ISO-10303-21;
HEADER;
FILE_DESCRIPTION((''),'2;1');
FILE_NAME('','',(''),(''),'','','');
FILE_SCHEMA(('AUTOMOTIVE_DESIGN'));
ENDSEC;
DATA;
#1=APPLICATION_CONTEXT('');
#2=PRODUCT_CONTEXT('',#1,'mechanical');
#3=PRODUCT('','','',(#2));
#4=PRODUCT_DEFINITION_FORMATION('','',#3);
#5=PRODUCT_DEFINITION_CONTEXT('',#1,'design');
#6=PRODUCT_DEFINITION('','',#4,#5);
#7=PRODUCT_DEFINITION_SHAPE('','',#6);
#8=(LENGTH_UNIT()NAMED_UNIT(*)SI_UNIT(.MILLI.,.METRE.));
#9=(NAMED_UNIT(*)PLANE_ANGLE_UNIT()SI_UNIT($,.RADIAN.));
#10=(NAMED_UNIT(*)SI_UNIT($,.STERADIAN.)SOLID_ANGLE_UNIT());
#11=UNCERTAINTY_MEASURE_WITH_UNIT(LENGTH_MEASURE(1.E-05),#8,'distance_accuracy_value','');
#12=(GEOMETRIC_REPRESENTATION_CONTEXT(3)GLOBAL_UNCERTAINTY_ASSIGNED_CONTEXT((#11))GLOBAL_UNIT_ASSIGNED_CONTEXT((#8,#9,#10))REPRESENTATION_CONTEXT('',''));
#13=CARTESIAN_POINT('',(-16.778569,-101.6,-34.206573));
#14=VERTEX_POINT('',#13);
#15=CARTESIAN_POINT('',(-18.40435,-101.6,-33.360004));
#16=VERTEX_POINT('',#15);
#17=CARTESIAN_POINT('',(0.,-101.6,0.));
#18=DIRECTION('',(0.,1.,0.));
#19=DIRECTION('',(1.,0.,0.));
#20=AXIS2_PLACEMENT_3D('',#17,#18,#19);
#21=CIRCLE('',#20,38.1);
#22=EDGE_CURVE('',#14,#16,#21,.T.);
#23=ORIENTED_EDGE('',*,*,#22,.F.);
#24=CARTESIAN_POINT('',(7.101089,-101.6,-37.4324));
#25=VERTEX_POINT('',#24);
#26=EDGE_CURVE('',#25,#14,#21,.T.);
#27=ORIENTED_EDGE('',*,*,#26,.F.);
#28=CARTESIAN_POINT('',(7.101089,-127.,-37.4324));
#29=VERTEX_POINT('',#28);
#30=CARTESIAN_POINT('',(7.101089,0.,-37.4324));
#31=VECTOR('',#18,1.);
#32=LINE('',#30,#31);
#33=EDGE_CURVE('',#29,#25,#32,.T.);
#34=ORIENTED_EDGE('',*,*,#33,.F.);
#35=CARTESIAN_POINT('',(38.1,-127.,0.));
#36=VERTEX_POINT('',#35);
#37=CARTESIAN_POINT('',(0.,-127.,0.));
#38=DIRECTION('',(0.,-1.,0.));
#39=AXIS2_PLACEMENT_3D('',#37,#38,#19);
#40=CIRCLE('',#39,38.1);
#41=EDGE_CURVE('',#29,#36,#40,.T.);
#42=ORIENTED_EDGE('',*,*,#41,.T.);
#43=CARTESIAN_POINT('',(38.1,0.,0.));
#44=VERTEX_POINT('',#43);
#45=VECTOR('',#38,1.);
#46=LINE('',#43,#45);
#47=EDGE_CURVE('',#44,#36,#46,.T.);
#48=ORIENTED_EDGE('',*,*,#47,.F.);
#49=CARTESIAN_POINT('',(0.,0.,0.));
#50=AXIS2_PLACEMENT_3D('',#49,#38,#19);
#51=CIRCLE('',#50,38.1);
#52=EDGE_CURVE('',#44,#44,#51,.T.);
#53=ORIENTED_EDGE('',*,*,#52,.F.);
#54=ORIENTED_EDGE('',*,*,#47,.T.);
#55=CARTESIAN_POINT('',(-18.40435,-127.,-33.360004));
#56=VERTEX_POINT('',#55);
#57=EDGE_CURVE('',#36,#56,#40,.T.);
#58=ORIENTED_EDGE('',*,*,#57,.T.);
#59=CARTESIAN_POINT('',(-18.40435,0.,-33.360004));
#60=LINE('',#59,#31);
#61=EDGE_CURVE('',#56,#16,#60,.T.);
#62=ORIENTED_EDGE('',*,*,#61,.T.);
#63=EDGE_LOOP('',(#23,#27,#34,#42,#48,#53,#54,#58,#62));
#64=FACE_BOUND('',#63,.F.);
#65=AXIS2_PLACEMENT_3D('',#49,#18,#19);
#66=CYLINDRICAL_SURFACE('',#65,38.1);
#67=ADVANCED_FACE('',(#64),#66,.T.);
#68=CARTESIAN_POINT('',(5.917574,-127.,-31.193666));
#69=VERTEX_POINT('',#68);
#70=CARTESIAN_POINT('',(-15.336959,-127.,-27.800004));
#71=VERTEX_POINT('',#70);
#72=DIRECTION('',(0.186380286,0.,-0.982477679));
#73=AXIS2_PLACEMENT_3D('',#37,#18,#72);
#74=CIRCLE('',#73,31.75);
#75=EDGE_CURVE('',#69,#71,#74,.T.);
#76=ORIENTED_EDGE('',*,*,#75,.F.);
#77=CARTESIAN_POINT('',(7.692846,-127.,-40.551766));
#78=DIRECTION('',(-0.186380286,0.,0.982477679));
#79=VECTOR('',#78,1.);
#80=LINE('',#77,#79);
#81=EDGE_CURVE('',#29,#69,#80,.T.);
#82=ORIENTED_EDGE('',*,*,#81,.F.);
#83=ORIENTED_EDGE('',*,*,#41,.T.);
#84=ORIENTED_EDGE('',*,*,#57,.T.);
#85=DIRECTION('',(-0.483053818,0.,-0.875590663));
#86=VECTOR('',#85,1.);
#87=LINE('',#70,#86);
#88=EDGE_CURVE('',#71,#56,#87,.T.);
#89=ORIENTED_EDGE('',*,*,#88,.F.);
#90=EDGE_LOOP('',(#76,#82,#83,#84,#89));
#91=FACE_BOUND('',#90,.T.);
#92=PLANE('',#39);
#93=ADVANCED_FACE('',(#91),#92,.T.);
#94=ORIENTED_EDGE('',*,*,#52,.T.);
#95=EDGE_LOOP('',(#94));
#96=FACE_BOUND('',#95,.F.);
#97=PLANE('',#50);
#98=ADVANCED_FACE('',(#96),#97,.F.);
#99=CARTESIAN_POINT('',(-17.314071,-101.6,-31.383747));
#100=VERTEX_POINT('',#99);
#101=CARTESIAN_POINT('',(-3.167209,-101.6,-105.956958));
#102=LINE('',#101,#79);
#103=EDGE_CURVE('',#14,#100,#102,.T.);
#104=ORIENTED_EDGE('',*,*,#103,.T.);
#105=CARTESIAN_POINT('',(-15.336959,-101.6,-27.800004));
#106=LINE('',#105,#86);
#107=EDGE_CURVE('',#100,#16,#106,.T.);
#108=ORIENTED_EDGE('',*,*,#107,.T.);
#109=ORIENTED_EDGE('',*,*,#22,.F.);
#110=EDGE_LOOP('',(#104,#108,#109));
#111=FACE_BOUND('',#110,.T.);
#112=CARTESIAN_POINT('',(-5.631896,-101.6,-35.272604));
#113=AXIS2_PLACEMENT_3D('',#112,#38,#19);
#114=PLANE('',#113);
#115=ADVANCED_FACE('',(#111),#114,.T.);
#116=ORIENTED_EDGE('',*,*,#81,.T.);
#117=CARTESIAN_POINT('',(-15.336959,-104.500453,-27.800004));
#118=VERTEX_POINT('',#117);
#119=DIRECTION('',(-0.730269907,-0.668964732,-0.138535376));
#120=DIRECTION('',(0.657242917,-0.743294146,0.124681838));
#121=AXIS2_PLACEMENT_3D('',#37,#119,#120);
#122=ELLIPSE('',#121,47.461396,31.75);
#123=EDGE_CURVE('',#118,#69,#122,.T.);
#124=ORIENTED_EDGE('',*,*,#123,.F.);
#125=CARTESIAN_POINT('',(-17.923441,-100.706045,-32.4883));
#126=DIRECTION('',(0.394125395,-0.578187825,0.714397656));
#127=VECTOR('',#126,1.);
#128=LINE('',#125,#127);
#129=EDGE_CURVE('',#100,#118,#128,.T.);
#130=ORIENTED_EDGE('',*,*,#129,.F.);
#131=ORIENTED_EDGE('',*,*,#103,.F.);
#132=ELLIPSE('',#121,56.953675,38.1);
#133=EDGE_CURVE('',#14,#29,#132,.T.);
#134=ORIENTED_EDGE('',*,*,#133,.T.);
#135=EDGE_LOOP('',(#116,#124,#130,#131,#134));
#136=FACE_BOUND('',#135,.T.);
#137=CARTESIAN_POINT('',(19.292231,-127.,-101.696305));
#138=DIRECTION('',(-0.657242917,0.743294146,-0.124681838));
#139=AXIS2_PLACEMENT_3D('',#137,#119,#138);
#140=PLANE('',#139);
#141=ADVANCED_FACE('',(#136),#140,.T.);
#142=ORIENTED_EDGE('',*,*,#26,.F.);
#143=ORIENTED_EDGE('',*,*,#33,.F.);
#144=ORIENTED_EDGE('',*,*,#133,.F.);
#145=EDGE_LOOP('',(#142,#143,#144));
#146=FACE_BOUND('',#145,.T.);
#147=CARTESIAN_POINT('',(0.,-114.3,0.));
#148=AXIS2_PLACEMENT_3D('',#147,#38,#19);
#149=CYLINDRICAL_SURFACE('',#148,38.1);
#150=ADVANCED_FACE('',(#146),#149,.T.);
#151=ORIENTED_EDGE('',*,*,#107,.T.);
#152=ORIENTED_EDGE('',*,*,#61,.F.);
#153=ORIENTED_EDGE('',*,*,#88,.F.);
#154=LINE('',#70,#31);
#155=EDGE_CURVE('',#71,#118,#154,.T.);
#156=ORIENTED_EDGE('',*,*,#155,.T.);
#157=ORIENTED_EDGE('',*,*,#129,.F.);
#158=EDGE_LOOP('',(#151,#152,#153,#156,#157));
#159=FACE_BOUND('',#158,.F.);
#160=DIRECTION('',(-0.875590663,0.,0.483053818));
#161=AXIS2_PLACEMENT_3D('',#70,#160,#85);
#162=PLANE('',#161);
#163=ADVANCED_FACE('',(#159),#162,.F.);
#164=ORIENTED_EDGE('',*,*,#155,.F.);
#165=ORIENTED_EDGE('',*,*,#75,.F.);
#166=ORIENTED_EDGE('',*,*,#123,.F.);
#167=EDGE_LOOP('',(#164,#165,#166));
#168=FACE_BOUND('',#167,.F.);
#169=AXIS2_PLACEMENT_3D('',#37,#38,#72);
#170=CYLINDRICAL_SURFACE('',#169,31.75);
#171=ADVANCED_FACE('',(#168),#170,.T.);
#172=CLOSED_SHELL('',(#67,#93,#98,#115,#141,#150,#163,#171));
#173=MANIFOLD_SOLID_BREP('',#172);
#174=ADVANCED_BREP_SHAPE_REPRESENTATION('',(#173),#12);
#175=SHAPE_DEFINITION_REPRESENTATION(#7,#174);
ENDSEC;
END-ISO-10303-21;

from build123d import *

# Parameters (mm, degrees)
F0_R        = 38.1
F1_DEPTH    = 127
F3_DEPTH    = 25.4
F4_T4_DEPTH = 137.1700814202
F4_S5_R     = 38.1
F4_T6_DEPTH = 76


# Not quite as in the source:
# - a fillet or chamfer that OpenCascade refuses, or shapes differently, is made with other operations: its cross-section is extruded or revolved along the edge and cut away or added


with BuildPart() as f1:
    # F0 (on Front) → F1 (new body)
    with BuildSketch(Plane.XZ):
        Circle(F0_R)
    extrude(amount=F1_DEPTH)

    # F2 (on face) → F3 (cut)
    with BuildSketch(Plane.XZ.offset(127)):
        with BuildLine():
            ThreePointArc((5.9175740903, -31.1936662944), (-5.0060402001, -31.3528636892), (-15.3369587331, -27.8000035399))
            Line((-15.3369587331, -27.8000035399), (-19.9380463531, -36.1400046019))
            ThreePointArc((-19.9380463531, -36.1400046019), (-6.5078522601, -40.758722796), (7.6928463174, -40.5517661827))
            Line((7.6928463174, -40.5517661827), (5.9175740903, -31.1936662944))
        make_face()
    extrude(amount=-F3_DEPTH, mode=Mode.SUBTRACT)

    # F4: chamfer of 25.4 x 22.86 on 1 edges, made by hand


with BuildPart() as f4_tool2:
    # F4_s3 → F4_t4 (new body)
    with BuildSketch(Plane(origin=(19.2922310235, 0, -101.6963045048), x_dir=(0, 1, 0), z_dir=(-0.1863802863, 0, 0.9824776786))):
        Polygon((-127, 0), (-101.6, 22.86), (-101.6, 0), align=None)
    extrude(amount=F4_T4_DEPTH)

    # F4_s5 → F4_t6 (intersect, symmetric)
    with BuildSketch(Plane.XZ.offset(114.3)):
        Circle(F4_S5_R)
    extrude(amount=F4_T6_DEPTH, both=True, mode=Mode.INTERSECT)

    split(bisect_by=Plane.XZ.offset(127), keep=Keep.BOTTOM)


with BuildPart() as f1_1:
    add(f1.part)

    # F4_t1: union F4_tool2
    add(f4_tool2.part)


solid = f1_1.part
